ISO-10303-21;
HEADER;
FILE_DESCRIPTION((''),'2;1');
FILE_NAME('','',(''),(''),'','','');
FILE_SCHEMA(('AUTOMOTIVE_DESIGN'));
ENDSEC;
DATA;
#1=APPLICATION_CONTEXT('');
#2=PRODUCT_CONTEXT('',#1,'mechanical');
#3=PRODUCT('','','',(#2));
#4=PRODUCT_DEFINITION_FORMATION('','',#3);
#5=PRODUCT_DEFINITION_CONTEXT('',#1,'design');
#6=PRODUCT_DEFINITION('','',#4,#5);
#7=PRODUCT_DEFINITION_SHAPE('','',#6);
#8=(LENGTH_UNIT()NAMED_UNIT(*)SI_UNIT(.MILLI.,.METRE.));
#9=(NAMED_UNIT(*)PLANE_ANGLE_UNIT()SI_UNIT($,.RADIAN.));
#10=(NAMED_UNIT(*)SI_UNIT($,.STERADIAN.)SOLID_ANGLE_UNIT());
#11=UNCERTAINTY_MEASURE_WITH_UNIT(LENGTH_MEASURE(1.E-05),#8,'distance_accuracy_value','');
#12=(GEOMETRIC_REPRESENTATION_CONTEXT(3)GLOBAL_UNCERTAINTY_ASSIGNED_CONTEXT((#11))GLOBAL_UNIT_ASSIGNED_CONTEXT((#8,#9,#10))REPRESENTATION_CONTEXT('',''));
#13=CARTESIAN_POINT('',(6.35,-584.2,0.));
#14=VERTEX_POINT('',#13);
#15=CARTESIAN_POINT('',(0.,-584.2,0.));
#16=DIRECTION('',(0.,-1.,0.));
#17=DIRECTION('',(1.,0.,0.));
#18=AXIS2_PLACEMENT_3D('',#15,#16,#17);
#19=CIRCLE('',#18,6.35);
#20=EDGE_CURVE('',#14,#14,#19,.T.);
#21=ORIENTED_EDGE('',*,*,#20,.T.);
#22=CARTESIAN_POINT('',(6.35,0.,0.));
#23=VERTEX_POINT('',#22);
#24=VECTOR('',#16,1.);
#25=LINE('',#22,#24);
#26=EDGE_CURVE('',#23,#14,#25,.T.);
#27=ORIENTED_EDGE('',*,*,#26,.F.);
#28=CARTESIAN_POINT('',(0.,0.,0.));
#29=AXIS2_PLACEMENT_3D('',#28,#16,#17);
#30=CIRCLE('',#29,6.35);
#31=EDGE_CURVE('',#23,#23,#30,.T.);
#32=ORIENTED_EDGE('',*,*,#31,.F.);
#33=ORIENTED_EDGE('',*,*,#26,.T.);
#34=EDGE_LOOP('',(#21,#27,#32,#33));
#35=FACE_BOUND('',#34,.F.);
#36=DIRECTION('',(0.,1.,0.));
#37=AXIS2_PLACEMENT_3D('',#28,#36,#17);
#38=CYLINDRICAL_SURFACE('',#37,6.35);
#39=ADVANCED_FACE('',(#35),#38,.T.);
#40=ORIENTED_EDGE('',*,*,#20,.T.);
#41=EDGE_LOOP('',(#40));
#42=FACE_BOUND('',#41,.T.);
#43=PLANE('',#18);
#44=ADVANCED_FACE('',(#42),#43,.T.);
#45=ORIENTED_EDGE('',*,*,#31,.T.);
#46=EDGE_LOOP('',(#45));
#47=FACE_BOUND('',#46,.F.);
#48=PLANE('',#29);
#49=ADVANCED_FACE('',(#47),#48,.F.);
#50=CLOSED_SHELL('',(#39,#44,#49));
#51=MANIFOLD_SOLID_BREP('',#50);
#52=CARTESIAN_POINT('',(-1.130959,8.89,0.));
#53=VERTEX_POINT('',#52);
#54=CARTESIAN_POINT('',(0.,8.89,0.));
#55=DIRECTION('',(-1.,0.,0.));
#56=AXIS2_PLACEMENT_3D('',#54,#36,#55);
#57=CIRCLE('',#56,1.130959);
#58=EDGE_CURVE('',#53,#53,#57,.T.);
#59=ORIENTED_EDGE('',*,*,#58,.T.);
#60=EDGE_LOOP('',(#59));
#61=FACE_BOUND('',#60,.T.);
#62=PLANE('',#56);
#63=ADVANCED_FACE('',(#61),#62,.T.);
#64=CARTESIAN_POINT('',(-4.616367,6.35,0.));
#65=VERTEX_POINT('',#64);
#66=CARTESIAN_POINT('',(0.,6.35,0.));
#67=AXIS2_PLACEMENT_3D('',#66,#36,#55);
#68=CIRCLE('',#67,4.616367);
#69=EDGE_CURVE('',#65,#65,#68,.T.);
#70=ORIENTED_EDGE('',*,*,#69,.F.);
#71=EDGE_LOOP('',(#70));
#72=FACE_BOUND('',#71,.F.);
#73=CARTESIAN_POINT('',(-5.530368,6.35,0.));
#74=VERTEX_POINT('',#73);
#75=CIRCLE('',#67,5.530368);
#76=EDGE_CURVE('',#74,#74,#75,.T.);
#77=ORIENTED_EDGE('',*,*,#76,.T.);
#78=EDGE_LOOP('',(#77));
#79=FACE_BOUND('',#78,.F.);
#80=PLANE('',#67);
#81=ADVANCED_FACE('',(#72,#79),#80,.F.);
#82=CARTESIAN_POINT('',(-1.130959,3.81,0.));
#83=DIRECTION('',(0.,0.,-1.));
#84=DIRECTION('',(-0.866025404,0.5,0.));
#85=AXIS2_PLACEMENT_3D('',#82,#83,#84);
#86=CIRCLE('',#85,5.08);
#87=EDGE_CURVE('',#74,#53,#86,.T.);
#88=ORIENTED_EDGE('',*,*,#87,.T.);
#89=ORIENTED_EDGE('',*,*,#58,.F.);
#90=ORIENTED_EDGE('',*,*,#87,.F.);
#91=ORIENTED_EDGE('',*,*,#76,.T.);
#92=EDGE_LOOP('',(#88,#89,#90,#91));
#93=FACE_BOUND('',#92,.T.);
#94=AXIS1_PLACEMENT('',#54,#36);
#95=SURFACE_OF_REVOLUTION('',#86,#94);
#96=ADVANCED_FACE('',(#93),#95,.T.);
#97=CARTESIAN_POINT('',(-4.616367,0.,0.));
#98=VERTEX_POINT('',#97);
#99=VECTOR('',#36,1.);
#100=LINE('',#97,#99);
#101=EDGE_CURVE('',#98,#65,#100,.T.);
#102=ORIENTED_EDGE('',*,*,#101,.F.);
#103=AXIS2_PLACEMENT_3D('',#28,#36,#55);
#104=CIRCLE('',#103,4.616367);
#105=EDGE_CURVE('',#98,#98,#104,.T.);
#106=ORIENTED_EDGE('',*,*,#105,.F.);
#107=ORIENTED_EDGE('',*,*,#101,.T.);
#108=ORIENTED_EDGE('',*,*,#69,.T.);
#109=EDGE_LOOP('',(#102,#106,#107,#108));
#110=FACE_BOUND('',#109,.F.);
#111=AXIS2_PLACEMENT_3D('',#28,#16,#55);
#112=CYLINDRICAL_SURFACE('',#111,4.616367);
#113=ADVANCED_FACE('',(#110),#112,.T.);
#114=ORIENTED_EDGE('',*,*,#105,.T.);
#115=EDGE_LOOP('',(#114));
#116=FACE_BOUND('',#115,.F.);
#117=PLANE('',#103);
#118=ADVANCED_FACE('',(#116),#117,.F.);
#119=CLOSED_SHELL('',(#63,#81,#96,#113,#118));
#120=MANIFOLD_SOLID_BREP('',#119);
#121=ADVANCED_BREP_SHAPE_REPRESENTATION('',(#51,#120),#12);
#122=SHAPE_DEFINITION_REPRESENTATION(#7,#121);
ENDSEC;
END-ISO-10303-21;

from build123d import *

# Parameters (mm, degrees)
F0_R     = 6.35
F1_DEPTH = 584.2
F2_R     = 4.6163674118
F3_DEPTH = 6.35
F4_R     = 5.5303676916
F5_DEPTH = 2.54


# Not quite as in the source:
# - a fillet or chamfer that OpenCascade refuses, or shapes differently, is made with other operations: its cross-section is extruded or revolved along the edge and cut away or added


with BuildPart() as f1:
    # F0 (on Front) → F1 (new body)
    with BuildSketch(Plane.XZ):
        Circle(F0_R)
    extrude(amount=F1_DEPTH)


with BuildPart() as f3:
    # F2 (on face) → F3 (new body)
    with BuildSketch(Plane(origin=(0, 0, 0), x_dir=(-1, 0, 0), z_dir=(0, 1, 0))):
        Circle(F2_R)
    extrude(amount=F3_DEPTH)

    # F4 (on face) → F5 (join)
    with BuildSketch(Plane(origin=(0, 6.35, 0), x_dir=(-1, 0, 0), z_dir=(0, 1, 0))):
        Circle(F4_R)
    extrude(amount=F5_DEPTH)

    # F6: fillet of radius 5.08 on 1 edges, made by hand

    # F6_s1 → F6_t2 (revolve, cut)
    with BuildSketch(Plane.XY):
        with BuildLine():
            ThreePointArc((-5.5303676916, 6.35), (-3.6709586404, 8.2094090512), (-1.1309586404, 8.89))
            Line((-1.1309586404, 8.89), (-5.5303676916, 8.89))
            Line((-5.5303676916, 8.89), (-5.5303676916, 6.35))
        make_face()
    revolve(axis=Axis((0, 8.89, 0), (0, 1, 0)), mode=Mode.SUBTRACT)


solid = Compound([f1.part, f3.part])
